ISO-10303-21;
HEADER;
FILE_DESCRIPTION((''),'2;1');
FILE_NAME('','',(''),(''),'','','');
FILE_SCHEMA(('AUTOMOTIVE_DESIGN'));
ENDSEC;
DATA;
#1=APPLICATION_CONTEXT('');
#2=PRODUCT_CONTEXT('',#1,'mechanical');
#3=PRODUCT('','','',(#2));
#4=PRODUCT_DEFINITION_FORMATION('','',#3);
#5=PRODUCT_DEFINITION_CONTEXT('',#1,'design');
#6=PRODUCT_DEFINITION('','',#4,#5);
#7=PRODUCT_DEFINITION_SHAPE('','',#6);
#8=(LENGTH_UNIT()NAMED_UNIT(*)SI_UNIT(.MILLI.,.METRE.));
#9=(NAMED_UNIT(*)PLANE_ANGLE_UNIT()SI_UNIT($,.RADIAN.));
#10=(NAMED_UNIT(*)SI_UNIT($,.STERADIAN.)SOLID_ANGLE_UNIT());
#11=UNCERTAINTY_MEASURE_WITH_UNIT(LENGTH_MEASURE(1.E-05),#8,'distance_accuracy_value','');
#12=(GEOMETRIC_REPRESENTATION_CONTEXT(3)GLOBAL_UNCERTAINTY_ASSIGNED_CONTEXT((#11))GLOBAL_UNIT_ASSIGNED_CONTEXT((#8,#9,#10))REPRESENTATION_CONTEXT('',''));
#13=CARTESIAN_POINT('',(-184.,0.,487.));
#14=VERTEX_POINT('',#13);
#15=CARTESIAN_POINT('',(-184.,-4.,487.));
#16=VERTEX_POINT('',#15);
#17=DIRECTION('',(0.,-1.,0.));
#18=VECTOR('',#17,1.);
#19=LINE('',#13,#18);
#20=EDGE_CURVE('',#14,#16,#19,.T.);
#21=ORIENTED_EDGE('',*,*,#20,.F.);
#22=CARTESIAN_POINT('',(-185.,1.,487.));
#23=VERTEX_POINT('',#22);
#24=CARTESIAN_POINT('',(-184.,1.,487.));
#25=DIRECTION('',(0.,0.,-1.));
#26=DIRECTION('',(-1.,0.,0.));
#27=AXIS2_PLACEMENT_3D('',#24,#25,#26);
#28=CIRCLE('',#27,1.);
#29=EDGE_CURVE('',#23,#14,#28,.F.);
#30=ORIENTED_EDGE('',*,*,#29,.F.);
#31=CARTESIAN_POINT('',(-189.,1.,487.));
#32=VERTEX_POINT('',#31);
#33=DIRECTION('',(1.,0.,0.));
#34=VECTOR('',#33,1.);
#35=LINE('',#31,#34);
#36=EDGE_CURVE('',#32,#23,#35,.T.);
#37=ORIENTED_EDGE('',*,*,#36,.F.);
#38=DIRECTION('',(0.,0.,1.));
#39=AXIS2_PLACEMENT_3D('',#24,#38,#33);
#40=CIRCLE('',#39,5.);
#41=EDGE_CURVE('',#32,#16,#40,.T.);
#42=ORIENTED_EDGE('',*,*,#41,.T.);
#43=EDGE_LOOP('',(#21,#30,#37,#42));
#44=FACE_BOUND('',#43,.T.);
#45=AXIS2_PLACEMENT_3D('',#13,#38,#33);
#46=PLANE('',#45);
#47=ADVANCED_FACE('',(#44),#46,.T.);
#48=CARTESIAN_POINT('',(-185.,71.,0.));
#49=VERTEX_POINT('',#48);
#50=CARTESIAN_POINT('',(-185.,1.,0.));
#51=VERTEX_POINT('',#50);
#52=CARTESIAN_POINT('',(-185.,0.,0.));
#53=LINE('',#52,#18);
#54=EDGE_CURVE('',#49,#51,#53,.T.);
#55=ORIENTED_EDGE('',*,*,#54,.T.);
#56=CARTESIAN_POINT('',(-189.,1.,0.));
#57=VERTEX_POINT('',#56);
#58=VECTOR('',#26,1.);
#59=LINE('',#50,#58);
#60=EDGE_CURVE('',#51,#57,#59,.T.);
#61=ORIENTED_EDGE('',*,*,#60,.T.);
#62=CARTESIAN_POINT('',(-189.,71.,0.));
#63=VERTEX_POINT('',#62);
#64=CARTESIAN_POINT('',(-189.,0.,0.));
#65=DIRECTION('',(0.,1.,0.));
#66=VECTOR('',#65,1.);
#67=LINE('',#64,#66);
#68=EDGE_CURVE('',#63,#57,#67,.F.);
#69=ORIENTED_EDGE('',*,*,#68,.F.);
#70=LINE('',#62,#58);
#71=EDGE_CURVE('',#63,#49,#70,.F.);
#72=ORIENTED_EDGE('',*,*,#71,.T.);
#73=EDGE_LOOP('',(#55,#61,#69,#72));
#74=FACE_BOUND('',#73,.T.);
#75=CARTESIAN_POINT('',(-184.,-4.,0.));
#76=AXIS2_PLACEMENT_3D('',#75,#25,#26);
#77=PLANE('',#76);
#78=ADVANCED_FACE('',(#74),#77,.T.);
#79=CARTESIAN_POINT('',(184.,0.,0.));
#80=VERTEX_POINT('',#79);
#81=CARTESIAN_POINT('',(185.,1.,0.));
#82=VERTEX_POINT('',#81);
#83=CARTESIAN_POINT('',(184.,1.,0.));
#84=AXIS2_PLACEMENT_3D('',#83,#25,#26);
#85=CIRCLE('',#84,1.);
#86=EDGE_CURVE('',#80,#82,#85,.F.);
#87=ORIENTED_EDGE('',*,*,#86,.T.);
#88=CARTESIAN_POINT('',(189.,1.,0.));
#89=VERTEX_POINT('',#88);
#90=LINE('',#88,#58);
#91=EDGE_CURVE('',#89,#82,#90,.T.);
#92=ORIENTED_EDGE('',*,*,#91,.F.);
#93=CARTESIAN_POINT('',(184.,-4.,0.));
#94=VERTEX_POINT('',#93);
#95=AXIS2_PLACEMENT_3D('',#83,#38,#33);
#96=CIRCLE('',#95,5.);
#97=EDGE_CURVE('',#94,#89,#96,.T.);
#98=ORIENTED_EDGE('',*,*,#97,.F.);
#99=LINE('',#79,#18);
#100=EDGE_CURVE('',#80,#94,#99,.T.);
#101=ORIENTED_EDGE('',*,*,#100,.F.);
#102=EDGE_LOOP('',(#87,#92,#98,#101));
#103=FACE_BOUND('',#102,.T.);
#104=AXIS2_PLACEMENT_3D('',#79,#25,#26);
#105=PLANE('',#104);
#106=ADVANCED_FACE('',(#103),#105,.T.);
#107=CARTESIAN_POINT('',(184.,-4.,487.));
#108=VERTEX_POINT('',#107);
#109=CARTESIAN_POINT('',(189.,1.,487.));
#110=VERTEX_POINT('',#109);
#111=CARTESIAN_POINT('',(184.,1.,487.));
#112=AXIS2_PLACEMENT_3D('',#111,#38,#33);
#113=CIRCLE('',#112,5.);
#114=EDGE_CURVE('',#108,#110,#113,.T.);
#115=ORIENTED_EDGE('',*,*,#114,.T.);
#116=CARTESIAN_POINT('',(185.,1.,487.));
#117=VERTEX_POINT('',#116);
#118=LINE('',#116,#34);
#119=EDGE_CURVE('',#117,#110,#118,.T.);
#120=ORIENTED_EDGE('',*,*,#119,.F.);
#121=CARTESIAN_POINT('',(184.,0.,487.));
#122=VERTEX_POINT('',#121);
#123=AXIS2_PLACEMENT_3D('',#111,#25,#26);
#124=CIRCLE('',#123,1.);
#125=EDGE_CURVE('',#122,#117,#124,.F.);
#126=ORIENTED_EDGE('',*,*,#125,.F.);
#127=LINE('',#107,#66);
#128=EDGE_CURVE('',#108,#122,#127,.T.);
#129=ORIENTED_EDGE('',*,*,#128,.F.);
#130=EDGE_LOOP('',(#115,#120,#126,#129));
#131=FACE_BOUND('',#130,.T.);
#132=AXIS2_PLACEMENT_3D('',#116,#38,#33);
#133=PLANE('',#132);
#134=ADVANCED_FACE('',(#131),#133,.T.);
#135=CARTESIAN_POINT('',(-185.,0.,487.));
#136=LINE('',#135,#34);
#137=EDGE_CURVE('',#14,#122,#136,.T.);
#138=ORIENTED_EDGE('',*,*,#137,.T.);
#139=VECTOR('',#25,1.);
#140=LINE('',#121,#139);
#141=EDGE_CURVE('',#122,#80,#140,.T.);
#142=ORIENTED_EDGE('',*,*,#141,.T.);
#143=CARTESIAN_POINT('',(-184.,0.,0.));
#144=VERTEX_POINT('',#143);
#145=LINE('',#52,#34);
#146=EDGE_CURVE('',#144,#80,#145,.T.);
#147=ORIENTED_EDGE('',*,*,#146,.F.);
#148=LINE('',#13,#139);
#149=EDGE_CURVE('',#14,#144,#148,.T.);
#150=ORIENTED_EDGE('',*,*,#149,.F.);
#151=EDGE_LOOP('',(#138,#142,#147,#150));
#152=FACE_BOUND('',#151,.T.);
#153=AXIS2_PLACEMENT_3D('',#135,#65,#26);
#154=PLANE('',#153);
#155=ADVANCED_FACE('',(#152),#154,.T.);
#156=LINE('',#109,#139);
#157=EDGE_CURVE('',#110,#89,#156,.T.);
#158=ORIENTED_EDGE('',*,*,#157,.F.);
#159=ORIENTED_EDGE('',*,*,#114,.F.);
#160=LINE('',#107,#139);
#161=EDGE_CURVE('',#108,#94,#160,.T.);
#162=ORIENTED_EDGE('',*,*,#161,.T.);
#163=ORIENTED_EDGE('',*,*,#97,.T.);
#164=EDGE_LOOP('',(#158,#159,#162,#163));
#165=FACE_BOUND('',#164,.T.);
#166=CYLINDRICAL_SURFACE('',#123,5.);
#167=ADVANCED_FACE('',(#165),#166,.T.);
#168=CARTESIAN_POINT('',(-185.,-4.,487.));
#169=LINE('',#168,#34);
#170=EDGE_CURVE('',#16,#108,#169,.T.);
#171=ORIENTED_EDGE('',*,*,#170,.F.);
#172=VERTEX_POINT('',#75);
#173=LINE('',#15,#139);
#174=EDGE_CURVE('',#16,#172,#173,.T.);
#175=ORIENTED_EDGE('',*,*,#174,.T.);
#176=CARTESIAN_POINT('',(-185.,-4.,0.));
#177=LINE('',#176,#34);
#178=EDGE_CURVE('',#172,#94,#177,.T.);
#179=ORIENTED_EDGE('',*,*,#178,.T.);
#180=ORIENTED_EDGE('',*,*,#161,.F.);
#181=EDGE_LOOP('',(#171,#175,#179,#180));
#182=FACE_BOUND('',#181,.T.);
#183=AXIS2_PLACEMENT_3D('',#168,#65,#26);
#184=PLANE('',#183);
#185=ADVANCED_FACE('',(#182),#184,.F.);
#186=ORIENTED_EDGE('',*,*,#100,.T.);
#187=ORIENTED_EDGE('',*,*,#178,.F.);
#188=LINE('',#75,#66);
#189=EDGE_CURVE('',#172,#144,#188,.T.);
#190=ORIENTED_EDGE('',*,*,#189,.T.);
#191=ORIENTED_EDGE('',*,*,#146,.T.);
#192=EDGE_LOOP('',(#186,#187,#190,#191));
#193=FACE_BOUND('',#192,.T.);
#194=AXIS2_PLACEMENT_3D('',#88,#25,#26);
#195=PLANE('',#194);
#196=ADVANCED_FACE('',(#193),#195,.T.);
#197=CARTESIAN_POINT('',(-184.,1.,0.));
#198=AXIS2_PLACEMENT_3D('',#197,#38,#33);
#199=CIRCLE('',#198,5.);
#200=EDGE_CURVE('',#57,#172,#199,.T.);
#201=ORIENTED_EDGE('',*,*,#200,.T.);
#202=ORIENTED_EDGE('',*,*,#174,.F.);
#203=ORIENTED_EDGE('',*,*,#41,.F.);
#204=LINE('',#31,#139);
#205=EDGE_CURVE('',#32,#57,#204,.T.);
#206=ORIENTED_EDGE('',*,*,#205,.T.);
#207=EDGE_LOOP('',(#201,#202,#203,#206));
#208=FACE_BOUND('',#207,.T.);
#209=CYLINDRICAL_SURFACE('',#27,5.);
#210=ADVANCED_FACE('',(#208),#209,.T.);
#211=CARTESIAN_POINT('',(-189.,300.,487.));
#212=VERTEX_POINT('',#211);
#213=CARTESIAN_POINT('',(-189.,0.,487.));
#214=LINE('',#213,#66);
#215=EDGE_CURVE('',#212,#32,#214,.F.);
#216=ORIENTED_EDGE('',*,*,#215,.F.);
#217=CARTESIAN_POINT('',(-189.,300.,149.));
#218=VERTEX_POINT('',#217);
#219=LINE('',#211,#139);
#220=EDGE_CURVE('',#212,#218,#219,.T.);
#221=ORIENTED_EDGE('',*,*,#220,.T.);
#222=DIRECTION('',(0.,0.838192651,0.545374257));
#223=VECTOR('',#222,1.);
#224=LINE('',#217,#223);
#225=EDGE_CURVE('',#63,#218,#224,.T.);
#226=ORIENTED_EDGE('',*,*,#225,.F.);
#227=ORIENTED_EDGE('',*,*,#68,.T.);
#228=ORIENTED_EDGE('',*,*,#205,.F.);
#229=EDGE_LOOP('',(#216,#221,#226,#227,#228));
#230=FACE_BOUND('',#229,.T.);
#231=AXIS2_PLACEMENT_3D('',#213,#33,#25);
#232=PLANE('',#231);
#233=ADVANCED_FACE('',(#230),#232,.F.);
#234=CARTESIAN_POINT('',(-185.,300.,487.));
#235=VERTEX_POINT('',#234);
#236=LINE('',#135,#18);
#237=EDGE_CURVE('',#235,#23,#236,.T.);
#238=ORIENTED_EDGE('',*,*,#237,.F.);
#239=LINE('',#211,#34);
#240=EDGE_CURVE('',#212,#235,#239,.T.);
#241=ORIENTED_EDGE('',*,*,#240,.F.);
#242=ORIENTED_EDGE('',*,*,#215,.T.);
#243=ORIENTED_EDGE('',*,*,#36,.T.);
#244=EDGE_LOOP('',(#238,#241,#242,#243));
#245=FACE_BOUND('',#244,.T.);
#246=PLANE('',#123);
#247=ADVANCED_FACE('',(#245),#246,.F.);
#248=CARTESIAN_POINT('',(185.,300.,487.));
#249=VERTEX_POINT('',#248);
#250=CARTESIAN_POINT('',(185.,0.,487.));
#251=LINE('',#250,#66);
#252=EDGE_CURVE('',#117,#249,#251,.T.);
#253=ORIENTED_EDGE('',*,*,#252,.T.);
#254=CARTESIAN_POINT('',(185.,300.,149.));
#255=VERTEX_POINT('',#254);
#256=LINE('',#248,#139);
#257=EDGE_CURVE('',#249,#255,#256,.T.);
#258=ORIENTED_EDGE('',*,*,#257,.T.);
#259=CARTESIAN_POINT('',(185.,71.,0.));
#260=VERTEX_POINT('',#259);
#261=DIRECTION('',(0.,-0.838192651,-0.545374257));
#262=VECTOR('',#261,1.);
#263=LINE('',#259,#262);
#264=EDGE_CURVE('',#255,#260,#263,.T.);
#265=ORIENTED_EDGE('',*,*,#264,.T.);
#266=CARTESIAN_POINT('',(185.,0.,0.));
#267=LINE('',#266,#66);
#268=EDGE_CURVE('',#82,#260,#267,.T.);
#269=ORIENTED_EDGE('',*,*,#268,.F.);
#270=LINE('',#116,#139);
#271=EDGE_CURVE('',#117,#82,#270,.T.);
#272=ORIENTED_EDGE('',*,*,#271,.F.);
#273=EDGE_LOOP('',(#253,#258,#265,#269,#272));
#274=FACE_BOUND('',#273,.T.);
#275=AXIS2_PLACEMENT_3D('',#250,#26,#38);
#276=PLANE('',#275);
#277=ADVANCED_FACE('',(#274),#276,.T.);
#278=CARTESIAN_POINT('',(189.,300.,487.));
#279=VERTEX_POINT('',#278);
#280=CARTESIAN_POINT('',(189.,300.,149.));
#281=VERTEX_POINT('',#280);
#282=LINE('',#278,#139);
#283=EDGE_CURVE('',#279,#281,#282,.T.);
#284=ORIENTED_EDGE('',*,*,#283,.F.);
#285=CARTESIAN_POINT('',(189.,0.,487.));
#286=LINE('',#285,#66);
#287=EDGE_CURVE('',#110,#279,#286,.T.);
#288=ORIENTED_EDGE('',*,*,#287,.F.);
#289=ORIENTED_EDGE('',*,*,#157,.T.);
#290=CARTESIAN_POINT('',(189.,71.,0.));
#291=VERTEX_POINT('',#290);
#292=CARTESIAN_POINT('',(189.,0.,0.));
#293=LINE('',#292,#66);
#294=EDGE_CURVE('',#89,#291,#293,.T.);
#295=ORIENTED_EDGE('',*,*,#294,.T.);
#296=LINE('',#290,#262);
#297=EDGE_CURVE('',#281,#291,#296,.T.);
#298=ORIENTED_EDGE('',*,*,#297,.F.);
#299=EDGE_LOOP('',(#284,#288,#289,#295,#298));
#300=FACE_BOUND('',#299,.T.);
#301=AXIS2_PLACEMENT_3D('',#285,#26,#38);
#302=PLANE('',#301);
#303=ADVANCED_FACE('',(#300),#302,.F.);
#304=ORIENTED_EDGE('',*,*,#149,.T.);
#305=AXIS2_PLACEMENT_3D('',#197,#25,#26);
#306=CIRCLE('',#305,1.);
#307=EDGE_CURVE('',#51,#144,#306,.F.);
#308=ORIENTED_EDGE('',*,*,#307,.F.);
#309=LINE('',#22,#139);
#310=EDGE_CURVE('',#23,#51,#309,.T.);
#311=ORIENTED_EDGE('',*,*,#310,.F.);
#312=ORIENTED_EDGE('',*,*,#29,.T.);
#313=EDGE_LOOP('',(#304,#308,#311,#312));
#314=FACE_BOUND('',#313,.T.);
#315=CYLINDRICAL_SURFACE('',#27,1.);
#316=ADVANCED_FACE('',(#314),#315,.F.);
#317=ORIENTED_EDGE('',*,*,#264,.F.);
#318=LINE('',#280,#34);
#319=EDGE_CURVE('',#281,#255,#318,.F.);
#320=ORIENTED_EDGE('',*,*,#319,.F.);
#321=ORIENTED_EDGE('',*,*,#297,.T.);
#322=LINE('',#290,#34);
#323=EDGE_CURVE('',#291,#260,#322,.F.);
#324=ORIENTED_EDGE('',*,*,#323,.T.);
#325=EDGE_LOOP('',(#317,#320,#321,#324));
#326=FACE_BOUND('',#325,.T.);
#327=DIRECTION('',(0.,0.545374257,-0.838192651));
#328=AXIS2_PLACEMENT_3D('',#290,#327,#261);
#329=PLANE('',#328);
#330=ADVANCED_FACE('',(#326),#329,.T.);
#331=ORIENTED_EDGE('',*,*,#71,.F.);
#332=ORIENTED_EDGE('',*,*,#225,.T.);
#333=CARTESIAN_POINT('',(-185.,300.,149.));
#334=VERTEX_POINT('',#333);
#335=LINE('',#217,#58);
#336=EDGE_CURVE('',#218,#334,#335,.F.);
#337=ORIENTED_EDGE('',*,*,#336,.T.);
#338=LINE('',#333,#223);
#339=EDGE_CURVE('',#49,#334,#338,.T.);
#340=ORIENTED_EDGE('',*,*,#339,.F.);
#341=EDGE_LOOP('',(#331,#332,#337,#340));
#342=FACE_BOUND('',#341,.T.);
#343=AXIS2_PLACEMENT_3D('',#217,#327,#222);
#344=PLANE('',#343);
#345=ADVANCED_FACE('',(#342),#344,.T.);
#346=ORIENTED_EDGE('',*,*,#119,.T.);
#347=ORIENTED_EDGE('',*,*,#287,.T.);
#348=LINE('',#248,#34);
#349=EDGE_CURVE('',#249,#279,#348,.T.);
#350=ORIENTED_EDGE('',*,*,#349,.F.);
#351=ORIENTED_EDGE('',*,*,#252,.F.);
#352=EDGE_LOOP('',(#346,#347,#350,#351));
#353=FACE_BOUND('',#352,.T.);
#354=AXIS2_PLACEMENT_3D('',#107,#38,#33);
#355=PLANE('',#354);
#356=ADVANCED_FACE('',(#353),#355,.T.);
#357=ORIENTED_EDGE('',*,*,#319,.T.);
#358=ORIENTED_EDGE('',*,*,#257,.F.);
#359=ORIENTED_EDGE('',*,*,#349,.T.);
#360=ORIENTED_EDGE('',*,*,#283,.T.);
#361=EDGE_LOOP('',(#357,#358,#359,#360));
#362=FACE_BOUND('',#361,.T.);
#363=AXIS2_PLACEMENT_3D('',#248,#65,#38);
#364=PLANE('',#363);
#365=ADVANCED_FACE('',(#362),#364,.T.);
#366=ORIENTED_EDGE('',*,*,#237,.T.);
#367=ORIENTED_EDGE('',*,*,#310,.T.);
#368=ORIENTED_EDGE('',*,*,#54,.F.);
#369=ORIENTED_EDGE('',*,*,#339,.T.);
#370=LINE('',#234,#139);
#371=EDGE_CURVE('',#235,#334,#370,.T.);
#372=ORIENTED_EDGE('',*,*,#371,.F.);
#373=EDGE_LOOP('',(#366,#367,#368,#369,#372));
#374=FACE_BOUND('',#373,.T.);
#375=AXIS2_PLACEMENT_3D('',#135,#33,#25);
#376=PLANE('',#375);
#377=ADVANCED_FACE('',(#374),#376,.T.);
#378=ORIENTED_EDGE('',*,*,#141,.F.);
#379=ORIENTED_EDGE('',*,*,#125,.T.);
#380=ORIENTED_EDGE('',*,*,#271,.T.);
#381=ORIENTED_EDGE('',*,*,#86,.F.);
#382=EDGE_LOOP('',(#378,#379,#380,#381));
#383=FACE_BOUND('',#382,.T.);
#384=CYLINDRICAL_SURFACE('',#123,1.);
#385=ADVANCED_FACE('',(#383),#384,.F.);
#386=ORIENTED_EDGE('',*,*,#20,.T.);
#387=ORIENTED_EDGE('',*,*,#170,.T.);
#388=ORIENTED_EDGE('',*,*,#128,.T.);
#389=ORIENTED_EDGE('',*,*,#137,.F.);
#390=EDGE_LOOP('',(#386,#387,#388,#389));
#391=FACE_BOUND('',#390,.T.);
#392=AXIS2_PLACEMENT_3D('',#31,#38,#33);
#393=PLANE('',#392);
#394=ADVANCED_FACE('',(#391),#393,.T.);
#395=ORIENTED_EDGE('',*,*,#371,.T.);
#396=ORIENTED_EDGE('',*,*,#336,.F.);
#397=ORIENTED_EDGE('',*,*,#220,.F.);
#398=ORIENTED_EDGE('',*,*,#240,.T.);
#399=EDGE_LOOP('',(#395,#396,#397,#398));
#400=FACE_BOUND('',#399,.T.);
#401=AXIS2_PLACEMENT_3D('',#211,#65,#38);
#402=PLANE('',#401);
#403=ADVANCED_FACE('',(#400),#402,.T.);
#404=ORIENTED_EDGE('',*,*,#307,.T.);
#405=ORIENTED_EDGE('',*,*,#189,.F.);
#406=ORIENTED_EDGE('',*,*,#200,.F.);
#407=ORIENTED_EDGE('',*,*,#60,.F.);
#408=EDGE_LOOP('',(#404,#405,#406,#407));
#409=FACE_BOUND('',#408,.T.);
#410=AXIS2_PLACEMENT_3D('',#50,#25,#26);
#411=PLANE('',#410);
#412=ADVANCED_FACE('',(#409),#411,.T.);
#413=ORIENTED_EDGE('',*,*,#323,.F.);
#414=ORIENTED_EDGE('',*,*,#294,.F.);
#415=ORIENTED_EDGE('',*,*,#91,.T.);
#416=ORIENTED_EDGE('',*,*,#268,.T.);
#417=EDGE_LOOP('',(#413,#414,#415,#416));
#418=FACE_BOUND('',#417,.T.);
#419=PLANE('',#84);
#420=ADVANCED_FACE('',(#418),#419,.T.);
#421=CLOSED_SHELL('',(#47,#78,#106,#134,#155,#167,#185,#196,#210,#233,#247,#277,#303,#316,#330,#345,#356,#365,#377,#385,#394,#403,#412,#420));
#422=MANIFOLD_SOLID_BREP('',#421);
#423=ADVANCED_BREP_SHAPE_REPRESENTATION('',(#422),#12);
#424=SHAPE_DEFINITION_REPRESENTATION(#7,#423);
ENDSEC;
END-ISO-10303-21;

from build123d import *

# Parameters (mm, degrees)
BASE_FLANGE1_DEPTH      = 487
CUT_EXTRUDE1_DEPTH      = 686.604113173
CUT_EXTRUDE1_DEPTH_BACK = 4
CUT_EXTRUDE2_DEPTH      = 686.604113173
CUT_EXTRUDE2_DEPTH_BACK = 4


# Sheet-metal steps are written as plain solids
with BuildPart() as part:
    # Sketch1 → Base-Flange1 (new body)
    with BuildSketch(Plane.XY):
        with BuildLine():
            Line((-185, 300), (-185, 1))
            ThreePointArc((-185, 1), (-184.707106781, 0.292893219), (-184, 0))
            Line((-184, 0), (184, 0))
            ThreePointArc((184, 0), (184.707106781, 0.292893219), (185, 1))
            Line((185, 1), (185, 300))
            Line((185, 300), (189, 300))
            Line((189, 300), (189, 1))
            ThreePointArc((189, 1), (187.535533906, -2.535533906), (184, -4))
            Line((184, -4), (-184, -4))
            ThreePointArc((-184, -4), (-187.535533906, -2.535533906), (-189, 1))
            Line((-189, 1), (-189, 300))
            Line((-189, 300), (-185, 300))
        make_face()
    extrude(amount=BASE_FLANGE1_DEPTH)

    # Sketch7 → Cut-Extrude1 (cut, two sides: drawn at the far end of the back side and taken through both)
    with BuildSketch(Plane(origin=(189, 0, 0), x_dir=(0, 0, -1), z_dir=(1, 0, 0)).offset(-CUT_EXTRUDE1_DEPTH_BACK)):
        Polygon((592.444694682, -839.53580592), (0, 71), (-149, 300), (-741.444694682, 1210.53580592), (1079.626917159, 2395.425195284), (2413.516306522, 345.353583443), align=None)
    extrude(amount=CUT_EXTRUDE1_DEPTH + CUT_EXTRUDE1_DEPTH_BACK, mode=Mode.SUBTRACT)

    # Sketch9 → Cut-Extrude2 (cut, two sides: drawn at the far end of the back side and taken through both)
    with BuildSketch(Plane.ZY.offset(189).offset(-CUT_EXTRUDE2_DEPTH_BACK)):
        Polygon((741.444694682, 1210.53580592), (149, 300), (0, 71), (-592.444694682, -839.53580592), (-2413.516306522, 345.353583443), (-1079.626917159, 2395.425195284), align=None)
    extrude(amount=CUT_EXTRUDE2_DEPTH + CUT_EXTRUDE2_DEPTH_BACK, mode=Mode.SUBTRACT)


solid = part.part
